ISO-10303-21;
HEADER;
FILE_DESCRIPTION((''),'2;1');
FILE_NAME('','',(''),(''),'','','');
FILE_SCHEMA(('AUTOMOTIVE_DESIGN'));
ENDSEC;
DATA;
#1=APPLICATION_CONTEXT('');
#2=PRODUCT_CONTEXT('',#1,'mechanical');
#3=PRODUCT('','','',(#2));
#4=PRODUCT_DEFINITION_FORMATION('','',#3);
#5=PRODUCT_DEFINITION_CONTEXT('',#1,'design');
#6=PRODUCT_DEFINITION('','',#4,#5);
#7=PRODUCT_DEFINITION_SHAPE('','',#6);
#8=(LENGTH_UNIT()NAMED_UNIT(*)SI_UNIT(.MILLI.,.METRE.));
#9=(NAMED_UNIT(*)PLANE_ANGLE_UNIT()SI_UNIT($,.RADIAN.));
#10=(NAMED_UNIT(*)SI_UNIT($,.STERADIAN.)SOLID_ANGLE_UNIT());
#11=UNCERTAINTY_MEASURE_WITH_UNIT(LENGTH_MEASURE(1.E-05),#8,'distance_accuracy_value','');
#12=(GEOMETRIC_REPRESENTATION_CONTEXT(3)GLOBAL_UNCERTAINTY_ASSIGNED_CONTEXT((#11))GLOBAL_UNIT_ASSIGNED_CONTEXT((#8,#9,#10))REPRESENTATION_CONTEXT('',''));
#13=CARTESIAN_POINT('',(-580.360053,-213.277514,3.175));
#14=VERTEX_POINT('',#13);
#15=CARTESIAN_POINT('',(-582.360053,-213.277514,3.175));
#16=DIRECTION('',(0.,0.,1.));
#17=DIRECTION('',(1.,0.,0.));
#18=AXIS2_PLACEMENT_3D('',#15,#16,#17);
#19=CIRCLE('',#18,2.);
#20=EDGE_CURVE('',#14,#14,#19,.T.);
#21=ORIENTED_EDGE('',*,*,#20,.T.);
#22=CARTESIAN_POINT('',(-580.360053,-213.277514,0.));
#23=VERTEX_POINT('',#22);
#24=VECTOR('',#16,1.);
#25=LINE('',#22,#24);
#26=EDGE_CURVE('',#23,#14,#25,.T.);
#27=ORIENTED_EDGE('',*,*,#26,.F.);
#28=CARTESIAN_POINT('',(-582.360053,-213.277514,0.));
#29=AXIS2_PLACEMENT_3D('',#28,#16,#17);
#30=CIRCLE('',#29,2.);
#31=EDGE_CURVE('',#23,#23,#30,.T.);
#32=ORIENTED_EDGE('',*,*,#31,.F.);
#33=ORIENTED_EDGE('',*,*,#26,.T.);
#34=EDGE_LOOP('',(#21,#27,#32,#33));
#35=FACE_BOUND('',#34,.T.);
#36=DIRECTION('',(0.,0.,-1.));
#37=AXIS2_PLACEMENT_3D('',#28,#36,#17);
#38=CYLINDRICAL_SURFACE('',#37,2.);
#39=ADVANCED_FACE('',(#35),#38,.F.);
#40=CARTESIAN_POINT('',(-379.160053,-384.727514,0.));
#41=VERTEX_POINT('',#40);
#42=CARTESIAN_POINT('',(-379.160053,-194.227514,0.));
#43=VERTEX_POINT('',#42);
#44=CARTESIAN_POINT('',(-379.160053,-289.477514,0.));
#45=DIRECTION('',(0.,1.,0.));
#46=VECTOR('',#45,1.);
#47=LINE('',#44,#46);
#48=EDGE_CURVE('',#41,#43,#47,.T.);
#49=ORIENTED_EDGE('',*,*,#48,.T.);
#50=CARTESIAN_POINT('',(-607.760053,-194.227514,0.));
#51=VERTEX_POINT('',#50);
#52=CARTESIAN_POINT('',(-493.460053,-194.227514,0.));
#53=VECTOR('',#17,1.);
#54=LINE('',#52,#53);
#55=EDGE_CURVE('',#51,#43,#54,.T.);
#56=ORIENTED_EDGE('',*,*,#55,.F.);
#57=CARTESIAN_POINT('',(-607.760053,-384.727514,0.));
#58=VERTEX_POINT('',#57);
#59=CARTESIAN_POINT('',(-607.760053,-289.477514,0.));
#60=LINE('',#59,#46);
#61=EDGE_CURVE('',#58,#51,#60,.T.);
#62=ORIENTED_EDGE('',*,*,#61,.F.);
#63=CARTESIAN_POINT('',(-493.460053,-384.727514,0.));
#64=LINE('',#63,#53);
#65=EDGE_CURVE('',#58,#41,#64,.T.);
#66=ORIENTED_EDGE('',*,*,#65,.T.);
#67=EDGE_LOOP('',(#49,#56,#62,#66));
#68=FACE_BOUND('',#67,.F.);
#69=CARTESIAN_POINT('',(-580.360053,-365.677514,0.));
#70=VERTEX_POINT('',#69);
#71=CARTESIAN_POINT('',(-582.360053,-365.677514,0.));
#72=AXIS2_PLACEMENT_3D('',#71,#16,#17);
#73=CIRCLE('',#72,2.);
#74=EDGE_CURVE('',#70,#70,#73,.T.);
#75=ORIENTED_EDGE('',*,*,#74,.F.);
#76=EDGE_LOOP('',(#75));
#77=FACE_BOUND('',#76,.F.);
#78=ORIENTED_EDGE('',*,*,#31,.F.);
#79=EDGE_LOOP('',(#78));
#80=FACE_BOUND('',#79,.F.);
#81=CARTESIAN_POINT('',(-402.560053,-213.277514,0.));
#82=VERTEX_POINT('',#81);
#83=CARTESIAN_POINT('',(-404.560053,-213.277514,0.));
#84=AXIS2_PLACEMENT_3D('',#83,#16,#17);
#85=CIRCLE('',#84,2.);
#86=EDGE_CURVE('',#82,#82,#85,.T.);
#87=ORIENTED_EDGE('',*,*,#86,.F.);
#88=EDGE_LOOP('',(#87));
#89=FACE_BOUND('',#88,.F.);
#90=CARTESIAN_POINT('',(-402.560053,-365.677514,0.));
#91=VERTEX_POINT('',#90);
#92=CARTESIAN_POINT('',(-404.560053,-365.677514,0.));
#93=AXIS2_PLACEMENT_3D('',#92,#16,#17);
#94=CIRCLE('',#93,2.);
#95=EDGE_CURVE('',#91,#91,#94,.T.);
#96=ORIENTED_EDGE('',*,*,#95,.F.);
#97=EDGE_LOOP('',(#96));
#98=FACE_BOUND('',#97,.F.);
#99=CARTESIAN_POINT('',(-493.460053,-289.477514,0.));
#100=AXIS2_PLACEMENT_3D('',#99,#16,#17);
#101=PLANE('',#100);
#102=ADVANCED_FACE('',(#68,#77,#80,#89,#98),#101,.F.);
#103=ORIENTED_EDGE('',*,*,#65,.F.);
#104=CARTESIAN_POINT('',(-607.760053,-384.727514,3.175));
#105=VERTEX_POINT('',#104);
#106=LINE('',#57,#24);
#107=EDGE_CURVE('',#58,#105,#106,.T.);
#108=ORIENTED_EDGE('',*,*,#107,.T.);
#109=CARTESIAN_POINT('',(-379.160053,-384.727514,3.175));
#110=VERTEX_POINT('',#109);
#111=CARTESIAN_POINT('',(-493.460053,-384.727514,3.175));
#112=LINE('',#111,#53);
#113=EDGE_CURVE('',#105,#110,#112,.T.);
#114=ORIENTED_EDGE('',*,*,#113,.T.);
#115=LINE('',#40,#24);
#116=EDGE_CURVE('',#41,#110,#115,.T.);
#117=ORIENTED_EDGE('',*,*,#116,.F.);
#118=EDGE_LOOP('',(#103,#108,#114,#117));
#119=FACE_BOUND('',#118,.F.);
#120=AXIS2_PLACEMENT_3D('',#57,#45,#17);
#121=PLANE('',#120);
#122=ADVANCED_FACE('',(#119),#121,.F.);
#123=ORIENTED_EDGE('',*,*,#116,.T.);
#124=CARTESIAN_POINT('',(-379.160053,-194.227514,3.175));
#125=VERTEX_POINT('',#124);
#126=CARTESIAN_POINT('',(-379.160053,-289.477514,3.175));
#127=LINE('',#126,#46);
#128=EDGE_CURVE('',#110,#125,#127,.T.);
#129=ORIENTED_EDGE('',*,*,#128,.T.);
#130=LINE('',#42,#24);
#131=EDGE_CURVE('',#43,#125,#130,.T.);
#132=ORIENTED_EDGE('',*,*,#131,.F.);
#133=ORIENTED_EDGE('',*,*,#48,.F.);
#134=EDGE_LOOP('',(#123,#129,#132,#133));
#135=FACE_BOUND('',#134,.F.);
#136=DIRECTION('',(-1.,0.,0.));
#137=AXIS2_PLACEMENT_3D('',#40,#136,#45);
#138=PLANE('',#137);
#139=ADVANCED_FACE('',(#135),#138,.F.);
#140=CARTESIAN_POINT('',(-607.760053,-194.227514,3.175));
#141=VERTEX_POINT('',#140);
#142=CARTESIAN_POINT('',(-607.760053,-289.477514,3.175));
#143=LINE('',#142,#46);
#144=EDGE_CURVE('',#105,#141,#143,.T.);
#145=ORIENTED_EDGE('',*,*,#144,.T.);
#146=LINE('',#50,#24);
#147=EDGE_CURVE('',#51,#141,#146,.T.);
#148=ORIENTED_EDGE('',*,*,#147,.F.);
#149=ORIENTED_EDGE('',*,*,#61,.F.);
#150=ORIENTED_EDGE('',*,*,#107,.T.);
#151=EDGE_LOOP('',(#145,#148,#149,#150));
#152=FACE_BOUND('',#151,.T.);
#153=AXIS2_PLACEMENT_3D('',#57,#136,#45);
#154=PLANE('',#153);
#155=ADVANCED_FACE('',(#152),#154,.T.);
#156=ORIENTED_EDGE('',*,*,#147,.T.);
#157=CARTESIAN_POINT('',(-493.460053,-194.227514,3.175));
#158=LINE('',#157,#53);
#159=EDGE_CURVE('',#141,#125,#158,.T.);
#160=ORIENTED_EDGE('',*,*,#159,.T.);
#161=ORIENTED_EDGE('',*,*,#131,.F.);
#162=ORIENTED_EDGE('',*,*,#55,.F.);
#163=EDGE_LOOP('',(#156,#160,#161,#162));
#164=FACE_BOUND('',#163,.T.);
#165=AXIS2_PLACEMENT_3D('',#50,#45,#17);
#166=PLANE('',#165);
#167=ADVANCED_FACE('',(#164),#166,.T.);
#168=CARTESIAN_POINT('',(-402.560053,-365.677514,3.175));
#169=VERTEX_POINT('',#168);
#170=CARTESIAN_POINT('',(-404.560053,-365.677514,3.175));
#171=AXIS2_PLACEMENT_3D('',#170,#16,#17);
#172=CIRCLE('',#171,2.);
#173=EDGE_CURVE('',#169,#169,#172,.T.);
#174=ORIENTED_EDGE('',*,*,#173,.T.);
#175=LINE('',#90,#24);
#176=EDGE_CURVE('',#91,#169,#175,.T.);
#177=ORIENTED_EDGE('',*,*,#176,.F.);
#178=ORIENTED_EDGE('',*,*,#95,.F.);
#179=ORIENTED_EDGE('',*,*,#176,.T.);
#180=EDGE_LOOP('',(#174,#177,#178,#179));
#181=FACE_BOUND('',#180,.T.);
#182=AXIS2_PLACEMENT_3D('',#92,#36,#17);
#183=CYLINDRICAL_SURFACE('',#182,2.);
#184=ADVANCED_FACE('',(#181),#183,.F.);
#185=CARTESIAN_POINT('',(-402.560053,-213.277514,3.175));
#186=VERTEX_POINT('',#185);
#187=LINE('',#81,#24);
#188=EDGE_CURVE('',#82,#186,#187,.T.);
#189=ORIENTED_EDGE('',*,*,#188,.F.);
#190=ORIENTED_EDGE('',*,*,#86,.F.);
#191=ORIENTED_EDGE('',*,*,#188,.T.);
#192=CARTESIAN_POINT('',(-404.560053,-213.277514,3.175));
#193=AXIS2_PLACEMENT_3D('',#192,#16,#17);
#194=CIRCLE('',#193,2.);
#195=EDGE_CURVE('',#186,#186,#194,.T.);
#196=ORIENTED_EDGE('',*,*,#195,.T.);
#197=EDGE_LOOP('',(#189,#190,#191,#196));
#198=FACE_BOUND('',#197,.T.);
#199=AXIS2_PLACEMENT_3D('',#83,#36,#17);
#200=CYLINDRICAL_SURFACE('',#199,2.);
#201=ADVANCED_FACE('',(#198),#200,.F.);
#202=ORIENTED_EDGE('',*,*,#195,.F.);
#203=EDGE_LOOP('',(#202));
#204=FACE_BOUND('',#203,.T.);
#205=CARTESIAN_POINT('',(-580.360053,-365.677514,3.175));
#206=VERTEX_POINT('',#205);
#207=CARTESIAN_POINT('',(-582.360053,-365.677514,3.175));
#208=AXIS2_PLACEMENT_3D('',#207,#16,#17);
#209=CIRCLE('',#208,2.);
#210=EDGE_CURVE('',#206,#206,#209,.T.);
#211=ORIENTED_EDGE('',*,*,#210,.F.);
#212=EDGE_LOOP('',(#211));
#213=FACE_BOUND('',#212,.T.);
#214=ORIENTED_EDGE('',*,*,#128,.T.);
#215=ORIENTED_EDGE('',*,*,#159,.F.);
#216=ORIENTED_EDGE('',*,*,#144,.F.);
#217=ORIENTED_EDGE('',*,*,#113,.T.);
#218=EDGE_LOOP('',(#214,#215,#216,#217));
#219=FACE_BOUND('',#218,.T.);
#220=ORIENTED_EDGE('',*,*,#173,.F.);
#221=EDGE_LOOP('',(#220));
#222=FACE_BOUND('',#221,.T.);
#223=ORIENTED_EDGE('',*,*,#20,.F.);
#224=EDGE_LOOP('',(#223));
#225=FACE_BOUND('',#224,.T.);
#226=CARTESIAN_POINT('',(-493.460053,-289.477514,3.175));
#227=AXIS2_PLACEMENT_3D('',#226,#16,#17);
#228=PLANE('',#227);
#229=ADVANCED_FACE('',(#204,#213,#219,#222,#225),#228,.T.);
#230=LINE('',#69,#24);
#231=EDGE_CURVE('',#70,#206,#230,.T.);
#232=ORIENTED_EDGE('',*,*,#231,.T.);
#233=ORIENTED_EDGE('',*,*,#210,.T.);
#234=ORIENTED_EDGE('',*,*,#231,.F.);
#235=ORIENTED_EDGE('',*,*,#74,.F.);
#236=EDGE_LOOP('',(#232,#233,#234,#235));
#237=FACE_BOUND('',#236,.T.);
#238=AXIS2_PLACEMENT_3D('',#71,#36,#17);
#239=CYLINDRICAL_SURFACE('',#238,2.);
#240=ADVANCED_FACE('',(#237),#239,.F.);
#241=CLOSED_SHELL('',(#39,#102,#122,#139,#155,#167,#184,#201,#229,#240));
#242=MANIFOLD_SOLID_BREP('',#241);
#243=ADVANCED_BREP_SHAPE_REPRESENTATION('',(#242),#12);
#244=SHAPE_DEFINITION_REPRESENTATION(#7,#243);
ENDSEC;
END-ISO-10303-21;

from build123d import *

# Parameters (mm, degrees)
F0_W     = 228.6
F0_H     = 190.5
F0_R     = 2
F1_DEPTH = 3.175


# Not quite as in the source:
# - a length typed as a fraction of an inch, garbled in the dataset ("3 / 203.2 mm" for 3/8 in), is restored


with BuildPart() as f1:
    # F0 (on Top) → F1 (new body)
    with BuildSketch(Plane.XY):
        with Locations((-493.4600528501, -289.4775138378)):
            Rectangle(F0_W, F0_H)
        with Locations((-582.3600528501, -365.6775138378)):
            Circle(F0_R, mode=Mode.SUBTRACT)
        with Locations((-404.5600528501, -365.6775138378)):
            Circle(F0_R, mode=Mode.SUBTRACT)
        with Locations((-582.3600528501, -213.2775138378)):
            Circle(F0_R, mode=Mode.SUBTRACT)
        with Locations((-404.5600528501, -213.2775138378)):
            Circle(F0_R, mode=Mode.SUBTRACT)
    extrude(amount=F1_DEPTH)


solid = f1.part
